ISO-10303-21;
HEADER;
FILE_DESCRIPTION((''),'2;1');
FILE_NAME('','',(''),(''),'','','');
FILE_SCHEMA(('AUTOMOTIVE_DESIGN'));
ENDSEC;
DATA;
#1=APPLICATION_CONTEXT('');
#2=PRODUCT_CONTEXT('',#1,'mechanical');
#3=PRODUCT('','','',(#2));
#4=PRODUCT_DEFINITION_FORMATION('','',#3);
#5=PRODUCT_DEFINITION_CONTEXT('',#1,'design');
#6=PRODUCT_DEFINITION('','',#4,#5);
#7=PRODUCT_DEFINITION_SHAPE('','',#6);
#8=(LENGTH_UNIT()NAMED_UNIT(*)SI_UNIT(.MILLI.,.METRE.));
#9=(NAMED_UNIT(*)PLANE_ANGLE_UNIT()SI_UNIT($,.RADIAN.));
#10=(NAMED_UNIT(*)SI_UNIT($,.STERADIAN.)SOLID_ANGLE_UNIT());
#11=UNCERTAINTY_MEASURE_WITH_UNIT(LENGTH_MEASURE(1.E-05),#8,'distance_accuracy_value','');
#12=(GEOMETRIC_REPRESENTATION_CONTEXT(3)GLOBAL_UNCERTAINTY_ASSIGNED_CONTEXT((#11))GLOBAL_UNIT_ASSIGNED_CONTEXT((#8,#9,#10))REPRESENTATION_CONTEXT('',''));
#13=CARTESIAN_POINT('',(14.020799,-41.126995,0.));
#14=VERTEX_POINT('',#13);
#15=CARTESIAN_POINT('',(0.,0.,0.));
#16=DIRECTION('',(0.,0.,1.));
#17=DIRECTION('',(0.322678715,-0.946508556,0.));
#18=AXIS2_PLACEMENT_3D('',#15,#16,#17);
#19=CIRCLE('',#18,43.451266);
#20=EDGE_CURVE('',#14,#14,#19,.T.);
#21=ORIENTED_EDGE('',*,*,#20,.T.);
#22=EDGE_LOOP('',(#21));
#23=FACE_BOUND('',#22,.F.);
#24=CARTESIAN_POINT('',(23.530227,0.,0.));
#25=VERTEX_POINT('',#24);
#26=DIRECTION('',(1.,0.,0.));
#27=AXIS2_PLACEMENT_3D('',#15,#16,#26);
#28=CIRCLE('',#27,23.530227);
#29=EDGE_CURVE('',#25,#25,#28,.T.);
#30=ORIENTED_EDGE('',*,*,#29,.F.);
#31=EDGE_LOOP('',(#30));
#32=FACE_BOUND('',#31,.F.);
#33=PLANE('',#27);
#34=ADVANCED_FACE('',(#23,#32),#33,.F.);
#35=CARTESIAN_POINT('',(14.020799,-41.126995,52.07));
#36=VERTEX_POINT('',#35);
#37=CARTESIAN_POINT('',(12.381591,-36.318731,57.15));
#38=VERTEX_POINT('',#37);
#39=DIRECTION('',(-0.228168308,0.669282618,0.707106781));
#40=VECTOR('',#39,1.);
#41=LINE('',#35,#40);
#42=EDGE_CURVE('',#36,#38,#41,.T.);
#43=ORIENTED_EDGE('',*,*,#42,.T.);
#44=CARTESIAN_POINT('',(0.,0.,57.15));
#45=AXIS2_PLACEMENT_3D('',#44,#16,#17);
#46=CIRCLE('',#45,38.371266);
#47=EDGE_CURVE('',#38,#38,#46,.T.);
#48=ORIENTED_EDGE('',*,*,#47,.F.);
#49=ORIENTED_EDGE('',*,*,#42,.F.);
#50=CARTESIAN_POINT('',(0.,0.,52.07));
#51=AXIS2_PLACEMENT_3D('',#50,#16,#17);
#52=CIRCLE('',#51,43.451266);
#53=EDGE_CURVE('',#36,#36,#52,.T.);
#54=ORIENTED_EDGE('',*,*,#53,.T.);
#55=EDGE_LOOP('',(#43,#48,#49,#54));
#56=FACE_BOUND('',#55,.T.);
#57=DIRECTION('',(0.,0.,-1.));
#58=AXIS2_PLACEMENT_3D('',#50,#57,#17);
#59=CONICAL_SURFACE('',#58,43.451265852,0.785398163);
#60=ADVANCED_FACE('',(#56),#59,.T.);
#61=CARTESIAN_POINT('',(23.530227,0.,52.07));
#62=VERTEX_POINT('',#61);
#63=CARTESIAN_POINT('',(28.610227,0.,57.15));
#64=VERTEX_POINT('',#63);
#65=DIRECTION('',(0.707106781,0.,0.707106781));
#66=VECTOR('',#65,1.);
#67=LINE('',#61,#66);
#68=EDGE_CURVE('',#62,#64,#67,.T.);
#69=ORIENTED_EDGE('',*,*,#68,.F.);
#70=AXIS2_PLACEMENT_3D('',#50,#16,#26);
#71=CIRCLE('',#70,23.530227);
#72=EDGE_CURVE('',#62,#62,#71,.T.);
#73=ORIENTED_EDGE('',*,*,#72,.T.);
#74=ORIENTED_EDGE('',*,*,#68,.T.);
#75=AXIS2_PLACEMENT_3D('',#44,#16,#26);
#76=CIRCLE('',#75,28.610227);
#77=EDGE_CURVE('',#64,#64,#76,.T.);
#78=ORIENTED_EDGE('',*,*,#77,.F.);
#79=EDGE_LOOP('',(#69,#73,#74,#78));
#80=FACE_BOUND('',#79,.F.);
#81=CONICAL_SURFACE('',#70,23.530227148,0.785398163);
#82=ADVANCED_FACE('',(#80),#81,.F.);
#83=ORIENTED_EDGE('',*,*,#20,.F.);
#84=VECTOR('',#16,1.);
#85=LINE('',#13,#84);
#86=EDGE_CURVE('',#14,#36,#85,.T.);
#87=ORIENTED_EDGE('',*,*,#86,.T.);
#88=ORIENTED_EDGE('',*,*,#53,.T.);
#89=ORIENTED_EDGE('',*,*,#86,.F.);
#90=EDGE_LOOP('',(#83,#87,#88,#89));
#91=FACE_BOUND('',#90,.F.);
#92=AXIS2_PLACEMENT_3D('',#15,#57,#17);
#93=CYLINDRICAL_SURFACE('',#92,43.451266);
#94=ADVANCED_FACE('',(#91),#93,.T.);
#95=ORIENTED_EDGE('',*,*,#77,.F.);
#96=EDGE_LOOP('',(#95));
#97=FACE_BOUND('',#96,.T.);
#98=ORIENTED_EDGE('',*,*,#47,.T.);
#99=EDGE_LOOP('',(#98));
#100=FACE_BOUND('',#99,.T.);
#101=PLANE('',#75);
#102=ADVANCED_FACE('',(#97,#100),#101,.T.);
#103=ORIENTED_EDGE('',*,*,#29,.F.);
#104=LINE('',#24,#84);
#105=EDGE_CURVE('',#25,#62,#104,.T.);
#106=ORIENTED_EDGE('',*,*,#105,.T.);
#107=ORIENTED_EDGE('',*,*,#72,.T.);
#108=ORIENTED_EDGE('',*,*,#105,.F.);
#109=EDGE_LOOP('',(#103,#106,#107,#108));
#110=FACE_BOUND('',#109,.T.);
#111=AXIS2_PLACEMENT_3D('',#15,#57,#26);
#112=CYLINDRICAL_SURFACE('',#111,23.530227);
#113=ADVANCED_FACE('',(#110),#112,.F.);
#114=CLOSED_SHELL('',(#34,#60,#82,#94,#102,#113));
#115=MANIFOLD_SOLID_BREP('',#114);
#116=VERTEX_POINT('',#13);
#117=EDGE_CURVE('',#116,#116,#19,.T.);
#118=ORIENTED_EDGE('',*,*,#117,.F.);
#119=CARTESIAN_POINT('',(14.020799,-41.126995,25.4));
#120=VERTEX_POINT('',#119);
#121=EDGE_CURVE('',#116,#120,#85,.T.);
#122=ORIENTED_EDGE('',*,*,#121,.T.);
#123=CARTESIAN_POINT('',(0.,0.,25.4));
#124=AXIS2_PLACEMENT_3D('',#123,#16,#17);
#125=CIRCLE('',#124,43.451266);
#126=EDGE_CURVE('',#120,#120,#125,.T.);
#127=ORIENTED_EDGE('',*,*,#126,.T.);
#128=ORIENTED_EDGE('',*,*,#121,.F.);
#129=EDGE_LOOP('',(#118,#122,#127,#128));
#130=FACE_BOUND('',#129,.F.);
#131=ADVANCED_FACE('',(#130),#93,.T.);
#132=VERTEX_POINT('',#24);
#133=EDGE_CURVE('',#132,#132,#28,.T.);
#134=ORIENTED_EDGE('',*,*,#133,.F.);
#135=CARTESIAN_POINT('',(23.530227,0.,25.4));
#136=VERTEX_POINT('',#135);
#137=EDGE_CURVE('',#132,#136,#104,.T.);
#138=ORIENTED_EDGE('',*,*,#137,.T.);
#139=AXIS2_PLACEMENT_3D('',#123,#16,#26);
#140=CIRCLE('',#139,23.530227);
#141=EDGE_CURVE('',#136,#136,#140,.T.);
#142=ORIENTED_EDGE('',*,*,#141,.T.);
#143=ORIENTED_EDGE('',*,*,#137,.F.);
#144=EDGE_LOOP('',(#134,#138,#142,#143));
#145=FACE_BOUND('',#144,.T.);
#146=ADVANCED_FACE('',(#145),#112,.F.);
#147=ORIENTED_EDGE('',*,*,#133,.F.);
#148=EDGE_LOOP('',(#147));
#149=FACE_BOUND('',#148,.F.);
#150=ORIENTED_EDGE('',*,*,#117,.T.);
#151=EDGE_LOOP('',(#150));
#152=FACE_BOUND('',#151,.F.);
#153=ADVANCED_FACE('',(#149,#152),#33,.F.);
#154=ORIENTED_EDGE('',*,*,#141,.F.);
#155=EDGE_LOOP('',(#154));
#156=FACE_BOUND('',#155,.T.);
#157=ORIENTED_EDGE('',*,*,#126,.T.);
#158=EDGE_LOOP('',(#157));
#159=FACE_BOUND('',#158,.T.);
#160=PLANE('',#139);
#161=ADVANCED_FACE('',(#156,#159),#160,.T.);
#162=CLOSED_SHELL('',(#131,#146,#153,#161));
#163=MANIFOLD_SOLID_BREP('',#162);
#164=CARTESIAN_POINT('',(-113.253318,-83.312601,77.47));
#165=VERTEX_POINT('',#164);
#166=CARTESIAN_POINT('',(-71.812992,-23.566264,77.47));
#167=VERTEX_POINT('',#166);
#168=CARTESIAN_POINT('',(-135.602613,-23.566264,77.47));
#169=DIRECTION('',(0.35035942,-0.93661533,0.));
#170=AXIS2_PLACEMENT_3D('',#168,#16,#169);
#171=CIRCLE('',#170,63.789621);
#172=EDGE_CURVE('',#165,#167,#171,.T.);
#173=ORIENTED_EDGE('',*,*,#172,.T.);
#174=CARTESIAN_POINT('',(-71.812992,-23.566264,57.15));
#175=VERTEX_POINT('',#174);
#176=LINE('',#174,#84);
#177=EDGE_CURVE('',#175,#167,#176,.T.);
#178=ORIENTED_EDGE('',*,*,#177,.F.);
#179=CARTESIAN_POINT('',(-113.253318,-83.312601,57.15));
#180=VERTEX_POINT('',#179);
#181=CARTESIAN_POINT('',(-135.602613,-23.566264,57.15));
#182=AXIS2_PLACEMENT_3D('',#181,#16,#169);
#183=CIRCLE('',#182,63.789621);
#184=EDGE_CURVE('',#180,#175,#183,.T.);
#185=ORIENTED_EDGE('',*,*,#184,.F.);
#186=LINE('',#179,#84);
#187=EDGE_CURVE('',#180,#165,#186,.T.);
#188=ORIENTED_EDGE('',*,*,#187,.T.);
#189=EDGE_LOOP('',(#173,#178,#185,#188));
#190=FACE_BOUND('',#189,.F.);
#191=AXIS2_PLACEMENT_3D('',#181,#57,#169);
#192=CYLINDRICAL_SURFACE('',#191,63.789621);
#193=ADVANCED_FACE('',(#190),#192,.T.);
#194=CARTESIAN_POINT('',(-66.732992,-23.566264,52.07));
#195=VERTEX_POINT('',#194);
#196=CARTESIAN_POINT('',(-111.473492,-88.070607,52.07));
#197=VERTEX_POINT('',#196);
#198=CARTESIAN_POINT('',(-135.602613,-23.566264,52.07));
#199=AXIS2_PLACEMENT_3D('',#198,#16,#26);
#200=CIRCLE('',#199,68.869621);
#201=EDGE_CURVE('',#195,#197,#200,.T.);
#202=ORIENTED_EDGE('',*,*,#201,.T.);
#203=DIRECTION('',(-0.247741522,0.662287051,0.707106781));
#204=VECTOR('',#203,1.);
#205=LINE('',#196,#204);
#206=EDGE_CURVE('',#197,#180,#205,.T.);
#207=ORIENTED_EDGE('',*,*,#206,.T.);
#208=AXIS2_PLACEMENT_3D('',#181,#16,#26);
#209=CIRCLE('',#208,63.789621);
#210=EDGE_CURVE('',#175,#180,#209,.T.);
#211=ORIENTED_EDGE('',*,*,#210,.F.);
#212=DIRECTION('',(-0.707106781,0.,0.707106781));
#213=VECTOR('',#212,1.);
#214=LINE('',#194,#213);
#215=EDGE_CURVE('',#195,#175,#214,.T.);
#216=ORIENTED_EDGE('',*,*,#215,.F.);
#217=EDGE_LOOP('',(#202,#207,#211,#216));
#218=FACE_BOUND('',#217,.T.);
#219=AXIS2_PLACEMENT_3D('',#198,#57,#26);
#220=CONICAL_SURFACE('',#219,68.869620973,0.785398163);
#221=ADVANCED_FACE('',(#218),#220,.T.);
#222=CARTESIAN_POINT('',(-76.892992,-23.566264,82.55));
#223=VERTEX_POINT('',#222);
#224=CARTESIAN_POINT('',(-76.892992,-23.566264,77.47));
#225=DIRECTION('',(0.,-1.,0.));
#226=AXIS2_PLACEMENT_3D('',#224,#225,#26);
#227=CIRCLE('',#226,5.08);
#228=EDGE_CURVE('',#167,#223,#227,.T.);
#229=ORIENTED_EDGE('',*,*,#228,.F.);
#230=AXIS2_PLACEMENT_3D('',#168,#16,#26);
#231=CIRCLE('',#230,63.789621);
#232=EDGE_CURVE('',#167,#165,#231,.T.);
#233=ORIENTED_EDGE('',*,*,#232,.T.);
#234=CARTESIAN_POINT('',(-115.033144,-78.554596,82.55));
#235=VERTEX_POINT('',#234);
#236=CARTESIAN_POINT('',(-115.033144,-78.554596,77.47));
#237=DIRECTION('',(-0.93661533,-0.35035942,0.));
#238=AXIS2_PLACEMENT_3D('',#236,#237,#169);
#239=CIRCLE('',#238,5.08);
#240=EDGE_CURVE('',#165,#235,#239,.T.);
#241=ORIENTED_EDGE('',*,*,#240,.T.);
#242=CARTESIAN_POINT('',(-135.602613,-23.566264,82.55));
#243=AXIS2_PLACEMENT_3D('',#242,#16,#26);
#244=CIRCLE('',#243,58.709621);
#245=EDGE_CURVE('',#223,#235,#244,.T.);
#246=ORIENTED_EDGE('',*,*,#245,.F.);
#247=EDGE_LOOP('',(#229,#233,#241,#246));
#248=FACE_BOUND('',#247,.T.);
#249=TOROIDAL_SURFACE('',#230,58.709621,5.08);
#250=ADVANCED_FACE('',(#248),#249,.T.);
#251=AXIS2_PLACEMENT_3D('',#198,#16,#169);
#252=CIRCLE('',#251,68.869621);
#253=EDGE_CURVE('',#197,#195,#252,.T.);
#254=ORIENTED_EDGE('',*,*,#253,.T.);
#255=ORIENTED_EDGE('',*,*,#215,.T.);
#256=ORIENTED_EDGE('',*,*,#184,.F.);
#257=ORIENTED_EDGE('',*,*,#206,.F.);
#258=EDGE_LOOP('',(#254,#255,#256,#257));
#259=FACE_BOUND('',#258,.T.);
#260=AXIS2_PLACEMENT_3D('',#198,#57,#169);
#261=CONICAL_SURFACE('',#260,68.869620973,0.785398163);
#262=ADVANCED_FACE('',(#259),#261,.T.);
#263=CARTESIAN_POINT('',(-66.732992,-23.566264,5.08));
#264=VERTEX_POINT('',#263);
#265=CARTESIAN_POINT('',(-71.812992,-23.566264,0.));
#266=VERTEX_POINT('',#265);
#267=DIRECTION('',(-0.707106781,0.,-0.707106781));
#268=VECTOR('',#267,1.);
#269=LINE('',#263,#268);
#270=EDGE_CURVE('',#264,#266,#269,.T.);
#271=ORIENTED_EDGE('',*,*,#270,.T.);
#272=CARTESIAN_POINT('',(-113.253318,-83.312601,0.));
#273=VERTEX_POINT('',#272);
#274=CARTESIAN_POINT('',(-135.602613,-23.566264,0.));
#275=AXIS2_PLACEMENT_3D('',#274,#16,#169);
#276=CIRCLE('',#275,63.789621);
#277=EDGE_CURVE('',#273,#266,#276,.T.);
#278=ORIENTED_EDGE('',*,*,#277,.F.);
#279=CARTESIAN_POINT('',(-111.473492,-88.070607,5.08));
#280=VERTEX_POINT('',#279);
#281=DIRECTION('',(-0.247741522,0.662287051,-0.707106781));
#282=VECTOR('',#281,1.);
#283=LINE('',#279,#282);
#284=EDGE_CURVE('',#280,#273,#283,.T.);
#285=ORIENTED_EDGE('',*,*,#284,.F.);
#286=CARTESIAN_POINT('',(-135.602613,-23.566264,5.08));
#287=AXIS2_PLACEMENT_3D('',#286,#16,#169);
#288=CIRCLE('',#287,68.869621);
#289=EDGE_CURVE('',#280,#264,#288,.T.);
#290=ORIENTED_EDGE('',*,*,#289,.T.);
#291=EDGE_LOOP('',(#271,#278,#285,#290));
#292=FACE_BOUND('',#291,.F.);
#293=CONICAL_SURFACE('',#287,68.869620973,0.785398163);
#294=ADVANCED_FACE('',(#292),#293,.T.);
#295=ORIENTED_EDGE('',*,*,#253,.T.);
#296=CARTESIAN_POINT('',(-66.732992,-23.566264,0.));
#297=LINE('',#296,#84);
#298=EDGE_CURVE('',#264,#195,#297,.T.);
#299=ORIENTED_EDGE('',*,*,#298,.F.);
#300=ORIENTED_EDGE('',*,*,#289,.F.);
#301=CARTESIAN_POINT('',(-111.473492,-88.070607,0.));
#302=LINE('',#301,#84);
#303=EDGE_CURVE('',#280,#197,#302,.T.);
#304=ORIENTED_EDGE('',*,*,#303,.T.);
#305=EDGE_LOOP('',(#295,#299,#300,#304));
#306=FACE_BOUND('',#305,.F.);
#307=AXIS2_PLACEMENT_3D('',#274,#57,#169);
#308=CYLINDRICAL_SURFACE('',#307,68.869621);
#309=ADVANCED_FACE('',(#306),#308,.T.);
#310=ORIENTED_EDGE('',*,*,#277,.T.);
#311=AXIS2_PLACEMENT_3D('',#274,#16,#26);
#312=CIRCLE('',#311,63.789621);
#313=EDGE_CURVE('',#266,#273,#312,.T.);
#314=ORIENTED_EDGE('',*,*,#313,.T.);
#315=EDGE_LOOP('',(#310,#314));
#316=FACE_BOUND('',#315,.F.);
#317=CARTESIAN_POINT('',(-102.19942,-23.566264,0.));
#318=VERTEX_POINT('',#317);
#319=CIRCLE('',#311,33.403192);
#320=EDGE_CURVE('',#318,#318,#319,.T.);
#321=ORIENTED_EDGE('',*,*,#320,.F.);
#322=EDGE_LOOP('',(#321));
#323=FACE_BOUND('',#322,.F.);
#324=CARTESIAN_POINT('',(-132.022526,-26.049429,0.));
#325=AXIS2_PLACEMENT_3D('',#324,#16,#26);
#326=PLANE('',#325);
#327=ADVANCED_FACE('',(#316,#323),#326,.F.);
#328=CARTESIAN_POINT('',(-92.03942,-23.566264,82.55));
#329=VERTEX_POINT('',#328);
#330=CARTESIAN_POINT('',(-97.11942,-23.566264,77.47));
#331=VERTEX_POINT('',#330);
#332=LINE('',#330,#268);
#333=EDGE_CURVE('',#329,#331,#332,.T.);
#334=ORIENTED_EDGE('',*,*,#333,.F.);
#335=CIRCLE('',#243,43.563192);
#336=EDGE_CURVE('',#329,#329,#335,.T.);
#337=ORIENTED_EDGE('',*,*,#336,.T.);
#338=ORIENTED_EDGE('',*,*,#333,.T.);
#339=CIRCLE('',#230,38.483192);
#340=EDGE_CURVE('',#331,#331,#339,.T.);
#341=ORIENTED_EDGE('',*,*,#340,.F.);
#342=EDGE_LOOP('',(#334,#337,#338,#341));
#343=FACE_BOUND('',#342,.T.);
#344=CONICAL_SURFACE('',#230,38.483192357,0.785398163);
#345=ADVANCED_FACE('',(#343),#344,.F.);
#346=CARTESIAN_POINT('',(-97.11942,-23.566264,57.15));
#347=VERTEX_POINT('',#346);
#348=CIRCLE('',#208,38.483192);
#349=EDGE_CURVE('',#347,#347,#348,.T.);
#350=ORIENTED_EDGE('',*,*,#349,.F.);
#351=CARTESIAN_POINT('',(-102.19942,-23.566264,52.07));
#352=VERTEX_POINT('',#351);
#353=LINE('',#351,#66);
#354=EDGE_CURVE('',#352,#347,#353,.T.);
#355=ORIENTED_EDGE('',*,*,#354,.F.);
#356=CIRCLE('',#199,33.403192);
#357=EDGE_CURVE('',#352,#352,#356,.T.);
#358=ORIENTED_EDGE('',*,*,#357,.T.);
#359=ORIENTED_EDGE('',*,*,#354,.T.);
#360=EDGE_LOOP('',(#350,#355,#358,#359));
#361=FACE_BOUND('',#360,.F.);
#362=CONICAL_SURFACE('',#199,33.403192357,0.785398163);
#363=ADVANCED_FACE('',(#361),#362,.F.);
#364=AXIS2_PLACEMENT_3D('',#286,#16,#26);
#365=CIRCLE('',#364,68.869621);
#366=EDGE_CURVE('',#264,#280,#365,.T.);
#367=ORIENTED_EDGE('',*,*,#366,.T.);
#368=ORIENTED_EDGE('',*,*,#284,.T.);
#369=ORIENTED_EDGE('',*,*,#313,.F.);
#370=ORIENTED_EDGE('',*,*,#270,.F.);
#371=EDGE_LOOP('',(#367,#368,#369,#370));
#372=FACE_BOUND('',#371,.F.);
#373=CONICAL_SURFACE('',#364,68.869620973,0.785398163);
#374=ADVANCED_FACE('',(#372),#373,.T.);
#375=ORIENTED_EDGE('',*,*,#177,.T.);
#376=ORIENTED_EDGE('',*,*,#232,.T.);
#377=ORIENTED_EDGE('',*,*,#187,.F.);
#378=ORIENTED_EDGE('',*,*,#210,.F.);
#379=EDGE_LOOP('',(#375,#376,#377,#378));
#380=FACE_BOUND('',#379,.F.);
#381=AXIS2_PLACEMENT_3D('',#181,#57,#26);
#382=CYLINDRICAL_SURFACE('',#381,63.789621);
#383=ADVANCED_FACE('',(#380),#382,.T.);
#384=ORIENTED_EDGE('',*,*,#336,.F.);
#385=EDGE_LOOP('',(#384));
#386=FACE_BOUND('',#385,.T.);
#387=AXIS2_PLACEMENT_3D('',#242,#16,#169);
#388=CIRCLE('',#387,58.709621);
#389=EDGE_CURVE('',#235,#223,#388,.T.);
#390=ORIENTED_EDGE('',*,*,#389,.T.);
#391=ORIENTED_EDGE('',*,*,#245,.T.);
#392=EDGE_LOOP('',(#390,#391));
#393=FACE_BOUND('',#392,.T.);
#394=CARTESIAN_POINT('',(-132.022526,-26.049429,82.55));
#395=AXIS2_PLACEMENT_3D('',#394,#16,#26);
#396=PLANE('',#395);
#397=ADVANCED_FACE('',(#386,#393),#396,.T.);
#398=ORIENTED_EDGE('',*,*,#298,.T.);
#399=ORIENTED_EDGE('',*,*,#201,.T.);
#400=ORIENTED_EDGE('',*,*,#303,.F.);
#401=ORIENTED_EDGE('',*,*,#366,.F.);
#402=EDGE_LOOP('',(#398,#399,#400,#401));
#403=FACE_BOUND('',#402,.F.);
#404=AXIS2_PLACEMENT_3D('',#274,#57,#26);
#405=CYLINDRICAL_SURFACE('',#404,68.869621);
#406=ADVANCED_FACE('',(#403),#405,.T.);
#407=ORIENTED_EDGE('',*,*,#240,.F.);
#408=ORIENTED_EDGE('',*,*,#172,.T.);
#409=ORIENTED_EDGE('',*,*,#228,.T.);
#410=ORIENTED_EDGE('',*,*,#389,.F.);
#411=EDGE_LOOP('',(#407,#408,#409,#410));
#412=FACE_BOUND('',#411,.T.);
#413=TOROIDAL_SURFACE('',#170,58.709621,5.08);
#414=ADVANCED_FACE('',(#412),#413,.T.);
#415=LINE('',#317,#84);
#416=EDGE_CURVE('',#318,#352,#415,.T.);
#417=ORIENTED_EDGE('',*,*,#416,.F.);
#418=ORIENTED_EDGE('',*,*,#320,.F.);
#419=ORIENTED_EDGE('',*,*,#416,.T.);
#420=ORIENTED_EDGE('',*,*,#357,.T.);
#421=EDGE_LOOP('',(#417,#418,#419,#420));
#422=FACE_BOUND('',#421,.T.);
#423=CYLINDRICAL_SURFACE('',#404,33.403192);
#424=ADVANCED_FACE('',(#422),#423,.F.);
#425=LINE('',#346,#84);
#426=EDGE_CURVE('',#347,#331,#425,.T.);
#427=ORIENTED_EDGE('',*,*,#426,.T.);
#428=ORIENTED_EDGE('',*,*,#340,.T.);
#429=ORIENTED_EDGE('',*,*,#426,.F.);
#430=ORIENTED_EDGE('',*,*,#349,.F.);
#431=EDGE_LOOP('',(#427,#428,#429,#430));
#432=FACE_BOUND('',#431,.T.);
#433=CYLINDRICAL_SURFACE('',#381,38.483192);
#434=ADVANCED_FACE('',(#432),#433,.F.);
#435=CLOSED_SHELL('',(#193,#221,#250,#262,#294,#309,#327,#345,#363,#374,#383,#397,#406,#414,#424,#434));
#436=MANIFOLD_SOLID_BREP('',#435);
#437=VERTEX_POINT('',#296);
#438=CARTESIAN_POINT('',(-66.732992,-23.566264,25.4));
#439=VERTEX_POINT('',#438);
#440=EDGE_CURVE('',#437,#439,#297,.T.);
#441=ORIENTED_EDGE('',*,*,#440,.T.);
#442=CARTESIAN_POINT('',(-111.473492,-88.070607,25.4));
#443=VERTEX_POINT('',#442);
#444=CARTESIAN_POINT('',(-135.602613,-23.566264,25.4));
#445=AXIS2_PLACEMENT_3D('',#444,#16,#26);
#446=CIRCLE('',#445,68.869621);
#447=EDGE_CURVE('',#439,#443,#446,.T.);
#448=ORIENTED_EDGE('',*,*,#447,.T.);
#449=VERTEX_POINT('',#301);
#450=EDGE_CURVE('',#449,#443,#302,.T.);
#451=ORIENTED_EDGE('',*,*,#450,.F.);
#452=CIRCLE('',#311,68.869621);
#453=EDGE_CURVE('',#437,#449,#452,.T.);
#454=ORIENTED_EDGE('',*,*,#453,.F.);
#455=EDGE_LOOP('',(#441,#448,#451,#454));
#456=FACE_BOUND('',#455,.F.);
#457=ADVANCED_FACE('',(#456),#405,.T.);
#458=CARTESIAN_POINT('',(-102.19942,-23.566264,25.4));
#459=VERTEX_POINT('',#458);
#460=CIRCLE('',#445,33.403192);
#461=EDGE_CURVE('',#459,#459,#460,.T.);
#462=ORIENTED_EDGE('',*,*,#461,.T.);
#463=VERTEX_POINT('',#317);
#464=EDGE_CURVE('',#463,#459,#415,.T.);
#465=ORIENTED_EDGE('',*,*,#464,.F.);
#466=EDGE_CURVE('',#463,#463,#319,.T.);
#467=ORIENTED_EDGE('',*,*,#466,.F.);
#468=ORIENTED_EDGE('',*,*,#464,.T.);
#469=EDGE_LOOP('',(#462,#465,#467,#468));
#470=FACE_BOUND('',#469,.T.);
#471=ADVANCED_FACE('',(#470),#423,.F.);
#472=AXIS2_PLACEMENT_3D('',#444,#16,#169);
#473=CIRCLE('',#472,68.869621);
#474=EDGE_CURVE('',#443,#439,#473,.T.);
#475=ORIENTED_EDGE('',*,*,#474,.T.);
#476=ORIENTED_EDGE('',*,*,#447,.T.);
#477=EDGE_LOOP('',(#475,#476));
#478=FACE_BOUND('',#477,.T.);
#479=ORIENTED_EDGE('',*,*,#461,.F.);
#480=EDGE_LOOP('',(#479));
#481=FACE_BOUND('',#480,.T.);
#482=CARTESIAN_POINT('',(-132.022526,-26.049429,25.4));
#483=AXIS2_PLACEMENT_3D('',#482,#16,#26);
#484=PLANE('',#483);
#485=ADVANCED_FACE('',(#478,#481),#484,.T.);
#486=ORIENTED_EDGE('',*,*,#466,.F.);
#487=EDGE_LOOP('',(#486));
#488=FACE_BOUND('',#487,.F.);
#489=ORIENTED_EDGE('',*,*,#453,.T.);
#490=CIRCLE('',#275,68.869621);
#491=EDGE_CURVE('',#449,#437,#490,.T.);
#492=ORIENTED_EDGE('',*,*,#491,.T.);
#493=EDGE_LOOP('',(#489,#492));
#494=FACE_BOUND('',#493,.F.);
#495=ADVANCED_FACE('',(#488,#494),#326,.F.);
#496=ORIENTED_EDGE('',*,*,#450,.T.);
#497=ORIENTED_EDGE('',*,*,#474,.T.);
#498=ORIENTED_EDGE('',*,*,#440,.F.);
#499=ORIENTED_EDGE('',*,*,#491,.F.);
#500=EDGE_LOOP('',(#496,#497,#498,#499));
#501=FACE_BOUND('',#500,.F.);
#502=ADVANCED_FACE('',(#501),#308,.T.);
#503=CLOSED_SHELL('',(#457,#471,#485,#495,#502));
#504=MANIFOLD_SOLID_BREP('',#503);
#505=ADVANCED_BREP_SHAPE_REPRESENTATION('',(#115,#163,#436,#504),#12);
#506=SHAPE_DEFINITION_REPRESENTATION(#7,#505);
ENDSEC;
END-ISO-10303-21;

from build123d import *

# Parameters (mm, degrees)
F0_R      = 33.4031923569
F1_DEPTH  = 57.15
F0_R_2    = 23.5302271484
F2_DEPTH  = 25.4
F3_SIZE   = 5.08
F3_2_SIZE = 5.08
F4_DEPTH  = 25.4
F5_R      = 5.08
F6_SIZE   = 5.08


with BuildPart() as f1:
    # F0 (on Top) → F1 (new body)
    with BuildSketch(Plane.XY):
        with BuildLine():
            ThreePointArc((-111.4734922268, -88.070607267), (-79.0129136651, -62.8171326984), (-66.7329917311, -23.5662644833))
            ThreePointArc((-66.7329917311, -23.5662644833), (-85.9374640879, 24.1453452767), (-132.8404473474, 45.2479428834))
            ThreePointArc((-132.8404473474, 45.2479428834), (-203.6044087614, -34.4649077917), (-111.4734922268, -88.070607267))
        make_face()
        with Locations((-135.6026127041, -23.5662644833)):
            Circle(F0_R, mode=Mode.SUBTRACT)
    extrude(amount=F1_DEPTH)

    # F3
    f3_edges = [f1.edges().sort_by_distance(p)[0] for p in [
        (-159.731733, 40.938078, 0),
        (-111.473492, -88.070607, 28.575),
        (-159.731733, 40.938078, 57.15),
        (-169.005805, -23.566264, 57.15),
    ]]
    chamfer(f3_edges, length=F3_SIZE)

    # F4 (add): a face of the model
    f4_faces = [f1.faces().sort_by_distance(p)[0] for p in [
        (-157.3197738153, 34.4901908242, 57.15),
    ]]
    extrude(f4_faces, amount=F4_DEPTH)

    # F5
    f5_edges = [f1.edges().sort_by_distance(p)[0] for p in [
        (-157.951907, 36.180072, 82.55),
    ]]
    fillet(f5_edges, radius=F5_R)

    # F6
    f6_edges = [f1.edges().sort_by_distance(p)[0] for p in [
        (-174.085805, -23.566264, 82.55),
    ]]
    chamfer(f6_edges, length=F6_SIZE)


with BuildPart() as f1b:
    # F0 (on Top) → F1, piece 2 (new body)
    with BuildSketch(Plane.XY):
        with BuildLine():
            ThreePointArc((43.4512658516, 0), (-35.3357747424, 25.2862715216), (14.0207986405, -41.1269949011))
            ThreePointArc((14.0207986405, -41.1269949011), (35.3357747424, -25.2862715216), (43.4512658516, 0))
        make_face()
        Circle(F0_R_2, mode=Mode.SUBTRACT)
    extrude(amount=F1_DEPTH)

    # F3#2
    f3_2_edges = [f1b.edges().sort_by_distance(p)[0] for p in [
        (-14.020799, 41.126995, 57.15),
        (-23.530227, 0, 57.15),
    ]]
    chamfer(f3_2_edges, length=F3_2_SIZE)


with BuildPart() as f2:
    # F0 (on Top) → F2 (new body)
    with BuildSketch(Plane.XY):
        with BuildLine():
            ThreePointArc((-111.4734922268, -88.070607267), (-79.0129136651, -62.8171326984), (-66.7329917311, -23.5662644833))
            ThreePointArc((-66.7329917311, -23.5662644833), (-85.9374640879, 24.1453452767), (-132.8404473474, 45.2479428834))
            ThreePointArc((-132.8404473474, 45.2479428834), (-203.6044087614, -34.4649077917), (-111.4734922268, -88.070607267))
        make_face()
        with Locations((-135.6026127041, -23.5662644833)):
            Circle(F0_R, mode=Mode.SUBTRACT)
    extrude(amount=F2_DEPTH)


with BuildPart() as f2b:
    # F0 (on Top) → F2, piece 2 (new body)
    with BuildSketch(Plane.XY):
        with BuildLine():
            ThreePointArc((43.4512658516, 0), (-35.3357747424, 25.2862715216), (14.0207986405, -41.1269949011))
            ThreePointArc((14.0207986405, -41.1269949011), (35.3357747424, -25.2862715216), (43.4512658516, 0))
        make_face()
        Circle(F0_R_2, mode=Mode.SUBTRACT)
    extrude(amount=F2_DEPTH)


solid = Compound([f1.part, f1b.part, f2.part, f2b.part])
